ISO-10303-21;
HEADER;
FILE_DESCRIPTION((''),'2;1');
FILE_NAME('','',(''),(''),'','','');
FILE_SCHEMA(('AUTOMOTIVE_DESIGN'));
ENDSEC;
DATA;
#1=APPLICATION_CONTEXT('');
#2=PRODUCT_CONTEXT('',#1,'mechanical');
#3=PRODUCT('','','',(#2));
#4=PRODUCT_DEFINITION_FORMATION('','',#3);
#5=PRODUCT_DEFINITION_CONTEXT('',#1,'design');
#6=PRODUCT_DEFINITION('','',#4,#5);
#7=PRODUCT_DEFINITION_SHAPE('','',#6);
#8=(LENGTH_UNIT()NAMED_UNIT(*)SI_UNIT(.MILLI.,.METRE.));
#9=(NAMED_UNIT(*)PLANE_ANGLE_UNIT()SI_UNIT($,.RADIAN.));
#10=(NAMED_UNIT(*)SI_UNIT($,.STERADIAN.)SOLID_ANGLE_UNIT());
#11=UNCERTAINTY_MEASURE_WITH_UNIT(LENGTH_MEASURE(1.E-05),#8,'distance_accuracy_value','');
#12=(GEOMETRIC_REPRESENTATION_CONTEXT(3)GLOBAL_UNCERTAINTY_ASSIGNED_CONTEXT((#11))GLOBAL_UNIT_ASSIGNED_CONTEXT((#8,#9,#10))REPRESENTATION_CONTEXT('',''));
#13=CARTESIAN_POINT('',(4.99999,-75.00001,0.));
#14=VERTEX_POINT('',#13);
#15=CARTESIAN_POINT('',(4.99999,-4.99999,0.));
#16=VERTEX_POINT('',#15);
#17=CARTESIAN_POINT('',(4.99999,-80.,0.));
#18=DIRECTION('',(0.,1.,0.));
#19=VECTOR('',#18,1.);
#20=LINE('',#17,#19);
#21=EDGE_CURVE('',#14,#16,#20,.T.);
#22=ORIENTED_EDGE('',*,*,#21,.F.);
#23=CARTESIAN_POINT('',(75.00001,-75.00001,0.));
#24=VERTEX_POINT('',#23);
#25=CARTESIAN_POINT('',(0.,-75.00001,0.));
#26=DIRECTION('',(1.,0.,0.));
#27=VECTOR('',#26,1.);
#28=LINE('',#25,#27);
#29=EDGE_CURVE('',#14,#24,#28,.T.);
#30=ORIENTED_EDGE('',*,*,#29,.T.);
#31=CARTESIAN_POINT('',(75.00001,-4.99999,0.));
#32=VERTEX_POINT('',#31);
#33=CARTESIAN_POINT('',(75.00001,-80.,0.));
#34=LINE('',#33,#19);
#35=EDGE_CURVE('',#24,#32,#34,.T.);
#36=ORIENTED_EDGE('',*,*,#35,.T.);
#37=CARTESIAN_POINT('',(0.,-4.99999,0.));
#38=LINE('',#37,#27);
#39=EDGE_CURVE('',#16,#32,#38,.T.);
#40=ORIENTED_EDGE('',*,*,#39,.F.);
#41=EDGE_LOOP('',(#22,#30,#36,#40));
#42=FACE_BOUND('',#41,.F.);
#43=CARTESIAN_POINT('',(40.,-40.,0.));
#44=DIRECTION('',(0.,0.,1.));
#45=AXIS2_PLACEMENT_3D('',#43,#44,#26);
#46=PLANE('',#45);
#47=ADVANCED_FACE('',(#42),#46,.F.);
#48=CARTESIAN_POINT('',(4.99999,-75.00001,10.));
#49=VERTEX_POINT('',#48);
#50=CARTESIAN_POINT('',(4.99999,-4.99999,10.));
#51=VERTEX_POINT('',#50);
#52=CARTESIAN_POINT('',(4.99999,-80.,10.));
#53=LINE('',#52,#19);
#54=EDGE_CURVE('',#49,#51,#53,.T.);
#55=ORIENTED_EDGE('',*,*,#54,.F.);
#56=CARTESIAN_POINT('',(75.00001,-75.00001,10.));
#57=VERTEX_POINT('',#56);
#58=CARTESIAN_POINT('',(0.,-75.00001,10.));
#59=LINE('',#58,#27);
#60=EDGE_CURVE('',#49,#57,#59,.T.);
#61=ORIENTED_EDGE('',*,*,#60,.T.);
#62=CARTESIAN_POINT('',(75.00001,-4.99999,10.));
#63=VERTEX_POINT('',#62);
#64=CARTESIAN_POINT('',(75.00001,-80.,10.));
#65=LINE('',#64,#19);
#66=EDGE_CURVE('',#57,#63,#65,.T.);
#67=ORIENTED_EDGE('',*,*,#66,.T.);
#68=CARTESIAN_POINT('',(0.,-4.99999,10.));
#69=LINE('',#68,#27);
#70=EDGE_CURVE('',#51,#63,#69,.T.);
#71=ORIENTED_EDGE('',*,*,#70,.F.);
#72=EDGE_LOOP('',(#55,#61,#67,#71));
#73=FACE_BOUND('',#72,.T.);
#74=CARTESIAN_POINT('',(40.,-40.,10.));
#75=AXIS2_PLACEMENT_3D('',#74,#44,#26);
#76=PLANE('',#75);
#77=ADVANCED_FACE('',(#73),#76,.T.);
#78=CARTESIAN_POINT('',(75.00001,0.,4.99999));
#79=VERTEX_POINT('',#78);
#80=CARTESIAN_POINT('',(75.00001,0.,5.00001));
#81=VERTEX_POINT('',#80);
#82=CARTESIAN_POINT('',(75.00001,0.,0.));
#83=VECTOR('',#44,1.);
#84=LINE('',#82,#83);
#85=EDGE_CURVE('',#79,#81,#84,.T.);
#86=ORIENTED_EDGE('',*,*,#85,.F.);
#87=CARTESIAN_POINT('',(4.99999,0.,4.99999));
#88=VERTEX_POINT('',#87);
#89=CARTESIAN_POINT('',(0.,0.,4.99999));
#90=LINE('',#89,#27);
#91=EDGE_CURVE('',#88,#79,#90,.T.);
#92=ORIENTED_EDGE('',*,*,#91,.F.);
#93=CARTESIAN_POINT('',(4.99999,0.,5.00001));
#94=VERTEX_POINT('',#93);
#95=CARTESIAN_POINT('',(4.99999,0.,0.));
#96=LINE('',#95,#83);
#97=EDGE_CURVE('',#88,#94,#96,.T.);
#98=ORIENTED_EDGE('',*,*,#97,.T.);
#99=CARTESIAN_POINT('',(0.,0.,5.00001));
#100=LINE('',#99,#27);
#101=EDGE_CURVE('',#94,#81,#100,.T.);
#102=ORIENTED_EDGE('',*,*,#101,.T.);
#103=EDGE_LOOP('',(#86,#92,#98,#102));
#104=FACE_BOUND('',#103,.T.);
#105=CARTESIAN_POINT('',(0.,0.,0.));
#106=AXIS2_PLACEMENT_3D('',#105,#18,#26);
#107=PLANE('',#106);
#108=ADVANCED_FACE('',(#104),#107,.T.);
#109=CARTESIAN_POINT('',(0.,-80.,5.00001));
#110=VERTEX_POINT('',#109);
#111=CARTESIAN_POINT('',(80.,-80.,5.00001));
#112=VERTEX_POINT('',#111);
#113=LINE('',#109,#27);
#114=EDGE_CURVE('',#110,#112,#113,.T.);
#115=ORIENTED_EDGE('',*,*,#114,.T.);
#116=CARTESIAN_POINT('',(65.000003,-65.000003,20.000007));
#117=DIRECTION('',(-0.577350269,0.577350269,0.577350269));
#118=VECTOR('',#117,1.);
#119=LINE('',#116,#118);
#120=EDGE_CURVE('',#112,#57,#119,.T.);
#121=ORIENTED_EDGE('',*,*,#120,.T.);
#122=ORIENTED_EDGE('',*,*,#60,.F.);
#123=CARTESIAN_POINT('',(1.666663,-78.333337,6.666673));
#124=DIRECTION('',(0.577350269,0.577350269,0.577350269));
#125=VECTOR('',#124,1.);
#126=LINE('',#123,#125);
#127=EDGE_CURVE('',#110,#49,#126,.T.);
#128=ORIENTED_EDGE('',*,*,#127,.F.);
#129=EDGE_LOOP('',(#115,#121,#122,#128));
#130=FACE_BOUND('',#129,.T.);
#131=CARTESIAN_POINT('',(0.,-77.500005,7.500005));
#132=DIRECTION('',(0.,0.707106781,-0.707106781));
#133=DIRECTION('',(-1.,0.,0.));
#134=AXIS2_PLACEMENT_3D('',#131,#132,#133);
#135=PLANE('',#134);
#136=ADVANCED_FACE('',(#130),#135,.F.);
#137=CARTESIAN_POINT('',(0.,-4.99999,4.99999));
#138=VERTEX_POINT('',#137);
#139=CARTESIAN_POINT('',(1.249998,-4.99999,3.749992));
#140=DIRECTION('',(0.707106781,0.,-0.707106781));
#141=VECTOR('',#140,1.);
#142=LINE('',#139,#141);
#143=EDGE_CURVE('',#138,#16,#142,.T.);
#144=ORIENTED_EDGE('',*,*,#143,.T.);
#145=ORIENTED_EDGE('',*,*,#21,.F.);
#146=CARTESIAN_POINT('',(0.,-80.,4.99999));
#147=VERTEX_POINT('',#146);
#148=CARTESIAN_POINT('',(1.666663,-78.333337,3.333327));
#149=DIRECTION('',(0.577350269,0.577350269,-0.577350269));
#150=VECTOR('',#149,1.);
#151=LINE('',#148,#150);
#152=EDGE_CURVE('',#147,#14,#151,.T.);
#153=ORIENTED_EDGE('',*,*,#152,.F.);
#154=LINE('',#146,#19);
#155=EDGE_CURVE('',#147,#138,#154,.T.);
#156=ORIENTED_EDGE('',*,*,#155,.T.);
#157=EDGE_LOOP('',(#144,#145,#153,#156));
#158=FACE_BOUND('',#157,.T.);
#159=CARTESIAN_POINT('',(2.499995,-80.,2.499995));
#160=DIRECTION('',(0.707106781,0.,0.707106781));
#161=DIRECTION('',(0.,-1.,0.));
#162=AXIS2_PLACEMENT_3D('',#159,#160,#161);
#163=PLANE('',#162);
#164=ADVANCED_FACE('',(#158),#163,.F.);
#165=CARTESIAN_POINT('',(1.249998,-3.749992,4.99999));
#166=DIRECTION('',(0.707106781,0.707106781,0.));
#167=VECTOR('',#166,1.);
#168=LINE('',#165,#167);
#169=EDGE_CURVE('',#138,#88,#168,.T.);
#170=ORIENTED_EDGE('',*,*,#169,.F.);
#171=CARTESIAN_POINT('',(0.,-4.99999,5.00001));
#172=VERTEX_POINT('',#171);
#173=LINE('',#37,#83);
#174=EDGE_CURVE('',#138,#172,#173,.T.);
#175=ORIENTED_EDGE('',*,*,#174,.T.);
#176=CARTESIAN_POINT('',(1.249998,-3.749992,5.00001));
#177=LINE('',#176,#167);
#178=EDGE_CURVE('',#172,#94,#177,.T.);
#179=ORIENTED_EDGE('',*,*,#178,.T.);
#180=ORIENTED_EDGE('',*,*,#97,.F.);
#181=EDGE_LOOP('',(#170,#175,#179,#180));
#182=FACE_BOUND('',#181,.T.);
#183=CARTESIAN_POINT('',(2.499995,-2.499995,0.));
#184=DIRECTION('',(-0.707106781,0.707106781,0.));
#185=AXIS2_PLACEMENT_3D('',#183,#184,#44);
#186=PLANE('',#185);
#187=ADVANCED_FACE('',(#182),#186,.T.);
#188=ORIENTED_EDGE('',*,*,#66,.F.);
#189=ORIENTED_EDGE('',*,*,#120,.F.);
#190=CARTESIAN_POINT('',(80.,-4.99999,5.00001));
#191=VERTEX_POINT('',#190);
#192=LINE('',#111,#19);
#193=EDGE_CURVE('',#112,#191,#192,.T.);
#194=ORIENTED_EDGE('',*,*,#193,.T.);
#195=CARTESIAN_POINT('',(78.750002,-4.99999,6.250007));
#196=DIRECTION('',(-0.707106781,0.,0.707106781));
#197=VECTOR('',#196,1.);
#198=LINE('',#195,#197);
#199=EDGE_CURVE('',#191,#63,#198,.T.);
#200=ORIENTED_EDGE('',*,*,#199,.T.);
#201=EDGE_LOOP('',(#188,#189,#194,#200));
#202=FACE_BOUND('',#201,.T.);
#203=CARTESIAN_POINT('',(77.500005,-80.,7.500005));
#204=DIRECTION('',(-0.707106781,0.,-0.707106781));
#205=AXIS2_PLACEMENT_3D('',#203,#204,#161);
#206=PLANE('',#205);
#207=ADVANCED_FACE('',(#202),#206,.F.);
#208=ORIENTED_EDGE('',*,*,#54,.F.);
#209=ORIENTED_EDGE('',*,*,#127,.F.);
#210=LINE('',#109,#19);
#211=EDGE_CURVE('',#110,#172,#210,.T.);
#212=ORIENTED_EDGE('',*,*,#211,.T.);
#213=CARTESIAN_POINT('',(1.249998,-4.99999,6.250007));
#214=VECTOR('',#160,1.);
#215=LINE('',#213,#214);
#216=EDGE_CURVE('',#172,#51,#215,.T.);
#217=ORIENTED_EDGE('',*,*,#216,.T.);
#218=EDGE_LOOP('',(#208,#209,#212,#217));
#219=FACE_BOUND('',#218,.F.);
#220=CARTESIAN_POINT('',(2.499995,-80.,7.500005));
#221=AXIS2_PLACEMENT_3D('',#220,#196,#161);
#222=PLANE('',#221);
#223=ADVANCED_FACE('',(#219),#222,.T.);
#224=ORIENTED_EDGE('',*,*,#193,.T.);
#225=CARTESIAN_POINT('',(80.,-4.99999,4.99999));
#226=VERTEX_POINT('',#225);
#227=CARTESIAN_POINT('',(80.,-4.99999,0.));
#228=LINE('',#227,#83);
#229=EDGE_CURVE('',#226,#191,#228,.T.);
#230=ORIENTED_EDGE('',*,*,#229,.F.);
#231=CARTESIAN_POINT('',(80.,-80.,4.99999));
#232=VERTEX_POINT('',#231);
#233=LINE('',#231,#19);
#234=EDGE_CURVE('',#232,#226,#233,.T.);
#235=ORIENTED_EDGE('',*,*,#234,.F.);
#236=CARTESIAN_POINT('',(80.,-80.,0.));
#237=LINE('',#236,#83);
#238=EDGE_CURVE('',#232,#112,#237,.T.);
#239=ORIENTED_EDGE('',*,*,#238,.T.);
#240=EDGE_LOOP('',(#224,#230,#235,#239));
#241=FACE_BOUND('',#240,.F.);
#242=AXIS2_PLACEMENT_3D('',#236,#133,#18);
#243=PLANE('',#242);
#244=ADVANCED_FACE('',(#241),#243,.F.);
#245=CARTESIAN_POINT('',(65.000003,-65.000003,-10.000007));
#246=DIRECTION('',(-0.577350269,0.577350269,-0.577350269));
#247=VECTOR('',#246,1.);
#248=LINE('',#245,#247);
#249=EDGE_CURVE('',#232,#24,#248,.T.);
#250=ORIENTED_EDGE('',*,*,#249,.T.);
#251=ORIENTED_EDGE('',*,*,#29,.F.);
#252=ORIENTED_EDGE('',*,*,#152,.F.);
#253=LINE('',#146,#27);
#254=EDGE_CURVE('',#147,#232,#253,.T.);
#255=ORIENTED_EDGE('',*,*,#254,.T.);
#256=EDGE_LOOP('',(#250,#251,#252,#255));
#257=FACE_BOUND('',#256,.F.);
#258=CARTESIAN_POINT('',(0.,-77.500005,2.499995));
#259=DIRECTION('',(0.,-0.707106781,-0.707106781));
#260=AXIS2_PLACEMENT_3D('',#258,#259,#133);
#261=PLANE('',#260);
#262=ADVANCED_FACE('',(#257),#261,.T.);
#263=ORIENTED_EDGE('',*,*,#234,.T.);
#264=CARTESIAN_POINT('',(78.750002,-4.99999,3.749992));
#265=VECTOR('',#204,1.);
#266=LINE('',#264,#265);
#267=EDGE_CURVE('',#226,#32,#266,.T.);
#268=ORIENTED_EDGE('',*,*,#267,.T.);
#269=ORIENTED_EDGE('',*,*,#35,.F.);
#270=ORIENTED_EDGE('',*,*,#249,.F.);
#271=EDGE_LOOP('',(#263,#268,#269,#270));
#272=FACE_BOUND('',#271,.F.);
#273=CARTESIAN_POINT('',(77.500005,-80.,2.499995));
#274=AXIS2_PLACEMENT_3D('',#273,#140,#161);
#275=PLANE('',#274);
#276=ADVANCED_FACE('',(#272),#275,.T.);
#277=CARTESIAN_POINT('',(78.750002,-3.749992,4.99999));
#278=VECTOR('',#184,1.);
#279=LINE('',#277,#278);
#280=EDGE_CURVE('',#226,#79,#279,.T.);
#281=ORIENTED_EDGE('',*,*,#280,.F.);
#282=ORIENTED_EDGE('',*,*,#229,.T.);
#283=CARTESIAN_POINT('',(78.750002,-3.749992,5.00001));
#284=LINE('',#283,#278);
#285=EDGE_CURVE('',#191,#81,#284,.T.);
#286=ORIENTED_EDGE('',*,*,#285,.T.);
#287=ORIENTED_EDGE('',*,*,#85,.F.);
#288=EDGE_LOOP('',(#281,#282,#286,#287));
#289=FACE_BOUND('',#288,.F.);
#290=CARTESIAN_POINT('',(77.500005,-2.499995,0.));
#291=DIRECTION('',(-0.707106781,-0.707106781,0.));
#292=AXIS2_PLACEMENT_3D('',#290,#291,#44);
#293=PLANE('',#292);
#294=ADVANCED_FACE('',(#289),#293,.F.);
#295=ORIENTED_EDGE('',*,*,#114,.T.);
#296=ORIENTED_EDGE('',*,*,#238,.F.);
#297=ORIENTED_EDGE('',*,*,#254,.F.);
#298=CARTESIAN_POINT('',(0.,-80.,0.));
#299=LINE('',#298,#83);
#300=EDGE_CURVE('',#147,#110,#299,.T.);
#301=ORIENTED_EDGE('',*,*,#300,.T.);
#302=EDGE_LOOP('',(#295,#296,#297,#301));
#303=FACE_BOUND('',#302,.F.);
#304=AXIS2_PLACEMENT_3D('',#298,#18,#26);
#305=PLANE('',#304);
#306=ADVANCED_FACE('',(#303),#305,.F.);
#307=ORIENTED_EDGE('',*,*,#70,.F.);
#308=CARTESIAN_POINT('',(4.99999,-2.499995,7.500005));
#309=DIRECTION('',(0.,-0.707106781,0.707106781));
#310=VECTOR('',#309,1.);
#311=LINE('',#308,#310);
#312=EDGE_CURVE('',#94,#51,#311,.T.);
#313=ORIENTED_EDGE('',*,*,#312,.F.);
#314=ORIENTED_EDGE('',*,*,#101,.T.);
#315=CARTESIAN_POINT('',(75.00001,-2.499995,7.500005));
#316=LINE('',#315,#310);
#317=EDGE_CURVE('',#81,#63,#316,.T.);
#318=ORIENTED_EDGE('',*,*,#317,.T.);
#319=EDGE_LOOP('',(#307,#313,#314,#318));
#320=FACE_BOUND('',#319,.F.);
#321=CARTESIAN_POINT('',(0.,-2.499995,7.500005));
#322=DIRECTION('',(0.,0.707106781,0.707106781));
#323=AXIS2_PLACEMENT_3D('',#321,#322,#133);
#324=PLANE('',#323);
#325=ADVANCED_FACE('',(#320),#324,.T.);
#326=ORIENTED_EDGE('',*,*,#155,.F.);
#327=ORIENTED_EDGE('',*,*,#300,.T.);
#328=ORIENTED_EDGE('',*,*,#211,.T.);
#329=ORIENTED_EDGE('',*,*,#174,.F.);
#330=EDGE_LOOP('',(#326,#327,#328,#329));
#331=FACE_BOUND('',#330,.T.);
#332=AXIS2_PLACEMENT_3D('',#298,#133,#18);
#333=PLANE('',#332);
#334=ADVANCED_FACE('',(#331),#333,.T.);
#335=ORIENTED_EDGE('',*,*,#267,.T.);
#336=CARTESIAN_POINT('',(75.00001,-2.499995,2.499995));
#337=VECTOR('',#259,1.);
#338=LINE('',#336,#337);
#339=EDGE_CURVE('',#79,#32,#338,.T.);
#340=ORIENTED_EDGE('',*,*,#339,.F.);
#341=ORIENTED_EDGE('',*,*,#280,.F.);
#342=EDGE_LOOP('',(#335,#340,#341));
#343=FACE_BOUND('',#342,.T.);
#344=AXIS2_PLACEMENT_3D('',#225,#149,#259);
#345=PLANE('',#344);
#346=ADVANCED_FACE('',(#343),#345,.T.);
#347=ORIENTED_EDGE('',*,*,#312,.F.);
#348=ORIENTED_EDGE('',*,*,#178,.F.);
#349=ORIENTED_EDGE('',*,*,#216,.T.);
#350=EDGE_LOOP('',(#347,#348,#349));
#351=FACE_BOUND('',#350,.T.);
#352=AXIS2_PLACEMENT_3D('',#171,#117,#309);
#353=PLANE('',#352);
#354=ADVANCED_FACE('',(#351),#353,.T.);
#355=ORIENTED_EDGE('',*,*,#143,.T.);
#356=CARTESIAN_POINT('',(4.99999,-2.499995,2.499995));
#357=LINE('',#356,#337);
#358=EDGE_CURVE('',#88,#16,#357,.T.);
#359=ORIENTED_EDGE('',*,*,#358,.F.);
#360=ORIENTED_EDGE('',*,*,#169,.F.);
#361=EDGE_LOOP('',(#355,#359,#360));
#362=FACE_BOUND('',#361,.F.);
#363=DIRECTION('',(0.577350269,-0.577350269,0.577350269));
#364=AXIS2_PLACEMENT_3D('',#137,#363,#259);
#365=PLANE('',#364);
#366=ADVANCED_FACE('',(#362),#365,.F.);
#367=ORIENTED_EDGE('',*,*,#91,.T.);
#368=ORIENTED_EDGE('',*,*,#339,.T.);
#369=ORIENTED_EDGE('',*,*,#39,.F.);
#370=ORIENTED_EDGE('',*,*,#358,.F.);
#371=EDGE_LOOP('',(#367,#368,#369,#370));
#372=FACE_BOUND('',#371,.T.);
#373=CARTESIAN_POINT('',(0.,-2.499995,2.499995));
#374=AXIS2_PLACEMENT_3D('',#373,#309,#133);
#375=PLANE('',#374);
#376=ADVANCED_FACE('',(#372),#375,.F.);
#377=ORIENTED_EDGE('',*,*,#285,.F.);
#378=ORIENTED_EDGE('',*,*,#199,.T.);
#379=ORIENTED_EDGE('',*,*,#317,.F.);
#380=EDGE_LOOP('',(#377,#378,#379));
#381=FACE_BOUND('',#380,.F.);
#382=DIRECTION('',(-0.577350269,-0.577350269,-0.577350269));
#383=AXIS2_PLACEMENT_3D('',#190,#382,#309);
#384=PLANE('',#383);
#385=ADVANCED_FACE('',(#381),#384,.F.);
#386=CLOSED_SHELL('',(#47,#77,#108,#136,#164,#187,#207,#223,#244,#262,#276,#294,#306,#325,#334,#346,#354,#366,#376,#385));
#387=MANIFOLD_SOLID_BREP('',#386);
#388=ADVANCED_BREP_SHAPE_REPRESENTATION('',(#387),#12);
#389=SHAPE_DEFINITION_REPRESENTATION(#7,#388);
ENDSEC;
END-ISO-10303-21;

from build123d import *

# Parameters (mm, degrees)
F0_W     = 80
F0_H     = 80
F1_DEPTH = 10
F2_SIZE  = 4.99999


# Not quite as in the source:
# - a fillet or chamfer is up to 0.001 mm smaller than in the source, because OpenCascade refuses the exact size


with BuildPart() as f1:
    # F0 (on Top) → F1 (new body)
    with BuildSketch(Plane.XY):
        with Locations((40, -40)):
            Rectangle(F0_W, F0_H)
    extrude(amount=F1_DEPTH)

    # F2 (size 5 in the source; OpenCascade refuses exactly that, so slightly less here)
    f2_edges = [f1.edges().sort_by_distance(p)[0] for p in [
        (40, 0, 0),
        (40, 0, 10),
        (0, 0, 5),
        (80, 0, 5),
        (80, -40, 0),
        (80, -40, 10),
        (40, -80, 0),
        (40, -80, 10),
        (0, -40, 0),
        (0, -40, 10),
    ]]
    chamfer(f2_edges, length=F2_SIZE)


solid = f1.part
